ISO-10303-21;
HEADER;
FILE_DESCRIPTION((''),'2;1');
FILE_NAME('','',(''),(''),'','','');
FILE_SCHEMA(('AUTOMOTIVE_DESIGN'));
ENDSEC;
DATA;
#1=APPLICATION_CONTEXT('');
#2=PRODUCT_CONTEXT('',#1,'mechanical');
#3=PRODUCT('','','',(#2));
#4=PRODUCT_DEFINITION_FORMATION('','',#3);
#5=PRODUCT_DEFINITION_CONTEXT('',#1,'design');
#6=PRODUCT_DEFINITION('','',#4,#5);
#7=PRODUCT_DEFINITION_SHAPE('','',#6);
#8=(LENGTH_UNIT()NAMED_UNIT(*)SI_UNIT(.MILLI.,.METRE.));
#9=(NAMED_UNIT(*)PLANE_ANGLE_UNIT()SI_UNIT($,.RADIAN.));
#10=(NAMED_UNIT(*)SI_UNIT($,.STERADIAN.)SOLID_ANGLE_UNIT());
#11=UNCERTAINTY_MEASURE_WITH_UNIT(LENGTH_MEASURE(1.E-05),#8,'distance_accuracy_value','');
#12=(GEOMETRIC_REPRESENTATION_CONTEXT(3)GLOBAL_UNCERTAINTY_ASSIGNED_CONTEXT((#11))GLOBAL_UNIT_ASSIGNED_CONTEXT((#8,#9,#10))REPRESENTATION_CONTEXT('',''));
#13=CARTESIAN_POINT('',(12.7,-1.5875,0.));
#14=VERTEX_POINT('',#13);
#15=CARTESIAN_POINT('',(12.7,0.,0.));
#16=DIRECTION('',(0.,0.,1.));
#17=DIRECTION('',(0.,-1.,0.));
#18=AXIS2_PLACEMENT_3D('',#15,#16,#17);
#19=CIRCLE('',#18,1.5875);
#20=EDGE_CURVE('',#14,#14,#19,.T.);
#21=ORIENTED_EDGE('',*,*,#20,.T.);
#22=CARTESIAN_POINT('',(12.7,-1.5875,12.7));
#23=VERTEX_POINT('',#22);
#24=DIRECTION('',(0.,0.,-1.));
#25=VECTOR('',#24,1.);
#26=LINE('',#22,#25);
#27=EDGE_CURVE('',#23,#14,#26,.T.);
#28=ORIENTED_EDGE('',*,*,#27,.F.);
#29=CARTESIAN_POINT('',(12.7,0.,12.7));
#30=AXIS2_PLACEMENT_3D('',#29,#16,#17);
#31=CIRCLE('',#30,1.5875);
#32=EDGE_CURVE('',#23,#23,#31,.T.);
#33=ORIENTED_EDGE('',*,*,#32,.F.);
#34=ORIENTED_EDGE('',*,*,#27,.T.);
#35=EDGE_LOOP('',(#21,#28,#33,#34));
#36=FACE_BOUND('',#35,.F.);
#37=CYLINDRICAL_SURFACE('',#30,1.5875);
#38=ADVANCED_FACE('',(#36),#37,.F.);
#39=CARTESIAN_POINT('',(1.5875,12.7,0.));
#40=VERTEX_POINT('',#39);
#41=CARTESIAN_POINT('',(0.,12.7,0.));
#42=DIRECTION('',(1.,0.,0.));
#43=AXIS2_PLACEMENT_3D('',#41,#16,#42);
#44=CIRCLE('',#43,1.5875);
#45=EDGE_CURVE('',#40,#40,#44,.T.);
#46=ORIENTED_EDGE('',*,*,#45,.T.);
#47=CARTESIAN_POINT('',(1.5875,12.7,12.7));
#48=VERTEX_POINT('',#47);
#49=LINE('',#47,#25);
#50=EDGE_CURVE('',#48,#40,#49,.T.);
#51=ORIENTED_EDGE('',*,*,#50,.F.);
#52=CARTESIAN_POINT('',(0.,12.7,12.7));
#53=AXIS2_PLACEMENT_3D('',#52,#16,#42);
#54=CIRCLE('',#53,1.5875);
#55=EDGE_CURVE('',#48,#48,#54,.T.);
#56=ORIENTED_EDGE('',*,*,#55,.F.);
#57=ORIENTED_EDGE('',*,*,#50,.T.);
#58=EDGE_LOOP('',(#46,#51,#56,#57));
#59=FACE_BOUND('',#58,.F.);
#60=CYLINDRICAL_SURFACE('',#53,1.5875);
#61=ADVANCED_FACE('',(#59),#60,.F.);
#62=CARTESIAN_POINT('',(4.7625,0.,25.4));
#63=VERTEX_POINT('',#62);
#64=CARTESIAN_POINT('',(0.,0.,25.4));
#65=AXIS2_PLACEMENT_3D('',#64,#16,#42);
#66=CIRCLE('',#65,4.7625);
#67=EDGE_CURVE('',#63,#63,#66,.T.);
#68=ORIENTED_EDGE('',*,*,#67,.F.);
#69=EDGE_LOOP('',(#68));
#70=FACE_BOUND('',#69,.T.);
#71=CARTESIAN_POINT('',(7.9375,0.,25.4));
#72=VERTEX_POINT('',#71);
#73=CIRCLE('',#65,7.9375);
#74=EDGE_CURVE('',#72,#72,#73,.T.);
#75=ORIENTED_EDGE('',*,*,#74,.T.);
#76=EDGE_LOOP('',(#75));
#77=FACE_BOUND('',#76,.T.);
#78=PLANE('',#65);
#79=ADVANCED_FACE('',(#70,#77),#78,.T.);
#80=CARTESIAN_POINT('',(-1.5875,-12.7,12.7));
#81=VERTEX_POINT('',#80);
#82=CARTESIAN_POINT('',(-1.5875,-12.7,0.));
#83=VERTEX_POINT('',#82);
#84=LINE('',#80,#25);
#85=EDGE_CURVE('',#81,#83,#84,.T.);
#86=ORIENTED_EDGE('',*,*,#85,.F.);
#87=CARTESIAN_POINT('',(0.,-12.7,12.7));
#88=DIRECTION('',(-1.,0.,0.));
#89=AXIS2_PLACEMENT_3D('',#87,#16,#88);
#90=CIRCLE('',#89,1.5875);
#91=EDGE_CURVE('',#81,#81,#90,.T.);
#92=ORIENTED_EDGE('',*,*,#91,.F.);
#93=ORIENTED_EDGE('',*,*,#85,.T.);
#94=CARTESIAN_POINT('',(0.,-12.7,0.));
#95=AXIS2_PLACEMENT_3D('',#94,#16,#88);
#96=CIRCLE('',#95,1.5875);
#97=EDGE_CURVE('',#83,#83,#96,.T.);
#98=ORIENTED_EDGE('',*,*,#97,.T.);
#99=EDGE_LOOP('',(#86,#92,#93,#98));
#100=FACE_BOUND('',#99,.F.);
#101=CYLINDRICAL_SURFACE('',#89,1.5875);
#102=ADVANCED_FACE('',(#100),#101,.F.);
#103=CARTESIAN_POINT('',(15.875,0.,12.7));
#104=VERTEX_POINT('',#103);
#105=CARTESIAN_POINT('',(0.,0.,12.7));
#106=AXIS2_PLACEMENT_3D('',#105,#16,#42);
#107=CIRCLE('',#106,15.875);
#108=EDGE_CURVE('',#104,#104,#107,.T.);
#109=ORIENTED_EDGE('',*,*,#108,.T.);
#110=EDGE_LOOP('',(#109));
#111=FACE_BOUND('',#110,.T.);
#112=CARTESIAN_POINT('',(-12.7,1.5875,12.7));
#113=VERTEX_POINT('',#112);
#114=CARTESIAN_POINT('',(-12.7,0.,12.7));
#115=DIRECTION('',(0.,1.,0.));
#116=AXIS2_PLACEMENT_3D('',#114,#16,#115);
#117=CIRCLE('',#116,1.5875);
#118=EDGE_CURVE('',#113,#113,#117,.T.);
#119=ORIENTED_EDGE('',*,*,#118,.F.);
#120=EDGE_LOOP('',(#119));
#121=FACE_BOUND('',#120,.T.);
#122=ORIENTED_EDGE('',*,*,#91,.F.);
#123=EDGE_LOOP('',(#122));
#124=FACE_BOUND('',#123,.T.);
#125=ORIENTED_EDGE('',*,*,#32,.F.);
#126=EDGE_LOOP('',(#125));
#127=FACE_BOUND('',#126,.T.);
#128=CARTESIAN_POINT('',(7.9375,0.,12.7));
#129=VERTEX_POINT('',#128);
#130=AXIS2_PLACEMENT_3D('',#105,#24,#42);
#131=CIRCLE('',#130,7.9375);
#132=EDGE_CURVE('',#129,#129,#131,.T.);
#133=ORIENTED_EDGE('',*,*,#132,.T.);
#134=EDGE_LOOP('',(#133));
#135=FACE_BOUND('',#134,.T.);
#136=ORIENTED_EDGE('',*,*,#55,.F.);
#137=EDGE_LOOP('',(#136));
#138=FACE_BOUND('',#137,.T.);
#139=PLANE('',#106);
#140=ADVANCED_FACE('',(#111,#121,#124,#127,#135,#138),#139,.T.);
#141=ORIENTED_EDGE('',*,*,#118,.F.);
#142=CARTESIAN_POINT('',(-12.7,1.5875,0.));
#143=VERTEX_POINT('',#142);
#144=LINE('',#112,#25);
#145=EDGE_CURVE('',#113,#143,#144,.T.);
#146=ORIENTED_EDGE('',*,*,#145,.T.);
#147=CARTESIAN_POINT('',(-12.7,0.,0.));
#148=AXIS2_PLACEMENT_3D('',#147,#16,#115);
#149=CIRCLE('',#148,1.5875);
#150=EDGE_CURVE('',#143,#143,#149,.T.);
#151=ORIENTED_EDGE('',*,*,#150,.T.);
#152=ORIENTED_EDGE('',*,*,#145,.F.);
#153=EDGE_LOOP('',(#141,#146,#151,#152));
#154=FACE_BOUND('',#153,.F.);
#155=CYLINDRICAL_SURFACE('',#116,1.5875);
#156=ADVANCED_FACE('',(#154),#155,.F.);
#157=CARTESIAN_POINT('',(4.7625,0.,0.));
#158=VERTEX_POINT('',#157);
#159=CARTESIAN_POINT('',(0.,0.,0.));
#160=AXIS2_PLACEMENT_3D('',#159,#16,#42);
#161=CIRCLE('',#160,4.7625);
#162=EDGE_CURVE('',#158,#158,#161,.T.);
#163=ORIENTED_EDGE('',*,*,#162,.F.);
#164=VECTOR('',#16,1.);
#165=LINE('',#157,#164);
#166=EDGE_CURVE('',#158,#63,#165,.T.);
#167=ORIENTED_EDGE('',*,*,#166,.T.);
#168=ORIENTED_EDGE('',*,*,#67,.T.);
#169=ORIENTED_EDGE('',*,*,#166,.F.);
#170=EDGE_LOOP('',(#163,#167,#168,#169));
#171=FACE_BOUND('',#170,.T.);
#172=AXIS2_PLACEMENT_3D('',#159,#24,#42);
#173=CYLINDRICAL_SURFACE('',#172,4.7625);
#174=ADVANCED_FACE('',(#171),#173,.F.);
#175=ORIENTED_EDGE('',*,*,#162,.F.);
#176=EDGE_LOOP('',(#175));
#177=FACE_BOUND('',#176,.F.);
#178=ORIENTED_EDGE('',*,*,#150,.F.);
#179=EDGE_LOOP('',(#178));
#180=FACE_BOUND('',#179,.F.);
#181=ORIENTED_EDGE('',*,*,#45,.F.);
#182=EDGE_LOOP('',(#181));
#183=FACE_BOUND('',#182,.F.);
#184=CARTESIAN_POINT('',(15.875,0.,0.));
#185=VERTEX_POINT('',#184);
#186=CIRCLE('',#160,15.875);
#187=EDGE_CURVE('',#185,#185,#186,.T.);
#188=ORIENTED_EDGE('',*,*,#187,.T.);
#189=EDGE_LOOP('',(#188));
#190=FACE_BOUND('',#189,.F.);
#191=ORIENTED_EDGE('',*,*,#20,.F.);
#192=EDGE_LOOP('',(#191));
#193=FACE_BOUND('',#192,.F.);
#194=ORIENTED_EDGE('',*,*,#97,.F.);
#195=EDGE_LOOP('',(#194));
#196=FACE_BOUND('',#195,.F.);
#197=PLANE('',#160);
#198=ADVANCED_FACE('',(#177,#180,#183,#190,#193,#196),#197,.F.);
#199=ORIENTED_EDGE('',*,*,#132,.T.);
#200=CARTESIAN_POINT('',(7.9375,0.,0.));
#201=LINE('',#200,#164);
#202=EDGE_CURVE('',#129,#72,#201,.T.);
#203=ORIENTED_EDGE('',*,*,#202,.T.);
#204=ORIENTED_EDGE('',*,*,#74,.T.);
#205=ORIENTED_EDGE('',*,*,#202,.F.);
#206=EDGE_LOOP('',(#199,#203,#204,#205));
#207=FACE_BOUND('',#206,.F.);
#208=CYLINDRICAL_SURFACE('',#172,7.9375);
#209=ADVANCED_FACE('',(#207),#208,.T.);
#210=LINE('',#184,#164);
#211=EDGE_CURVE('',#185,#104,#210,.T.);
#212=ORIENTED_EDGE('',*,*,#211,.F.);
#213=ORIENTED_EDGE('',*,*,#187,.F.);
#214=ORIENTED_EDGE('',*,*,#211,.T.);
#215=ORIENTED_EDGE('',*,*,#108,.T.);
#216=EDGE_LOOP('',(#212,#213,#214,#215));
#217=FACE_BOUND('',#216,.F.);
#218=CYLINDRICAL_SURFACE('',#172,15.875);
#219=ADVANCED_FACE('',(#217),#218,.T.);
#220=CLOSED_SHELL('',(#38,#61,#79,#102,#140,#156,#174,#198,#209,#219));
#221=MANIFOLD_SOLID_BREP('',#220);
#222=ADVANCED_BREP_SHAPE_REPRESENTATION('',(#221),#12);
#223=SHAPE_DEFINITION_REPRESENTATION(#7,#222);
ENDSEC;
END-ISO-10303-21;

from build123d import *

# Parameters (mm, degrees)
F0_R            = 15.875
F0_R_2          = 7.9375
F0_R_3          = 4.7625
F1_DEPTH        = 12.7
F2_DEPTH        = 25.4
F3_R            = 1.5875
F4_DEPTH        = 12.7
F4_COPIES_COUNT = 4


# Not quite as in the source:
# - a pattern or mirror of a feature is missing from the dataset's text; its kind, count and spacing are read off the source's solid


with BuildPart() as f1:
    # F0 (on Top) → F1 (new body)
    with BuildSketch(Plane.XY):
        Circle(F0_R)
        Circle(F0_R_2, mode=Mode.SUBTRACT)
        Circle(F0_R_2)
        Circle(F0_R_3, mode=Mode.SUBTRACT)
    extrude(amount=F1_DEPTH)

    # F0 (on Top) → F2 (join)
    with BuildSketch(Plane.XY):
        Circle(F0_R_2)
        Circle(F0_R_3, mode=Mode.SUBTRACT)
    extrude(amount=F2_DEPTH)

    # F3 (on face) → F4 (cut)
    with BuildSketch(Plane.XY.offset(12.7)):
        with Locations((0, 12.7)):
            Circle(F3_R)
    f4 = extrude(amount=-F4_DEPTH, mode=Mode.SUBTRACT)

    # F4_copies: F4 ×4 about axis
    f4_copies_axis = Axis((0, 0, 0), (0, 0, 1))
    for i in range(1, F4_COPIES_COUNT):
        add(f4.rotate(f4_copies_axis, i * 360 / F4_COPIES_COUNT), mode=Mode.SUBTRACT)


solid = f1.part
